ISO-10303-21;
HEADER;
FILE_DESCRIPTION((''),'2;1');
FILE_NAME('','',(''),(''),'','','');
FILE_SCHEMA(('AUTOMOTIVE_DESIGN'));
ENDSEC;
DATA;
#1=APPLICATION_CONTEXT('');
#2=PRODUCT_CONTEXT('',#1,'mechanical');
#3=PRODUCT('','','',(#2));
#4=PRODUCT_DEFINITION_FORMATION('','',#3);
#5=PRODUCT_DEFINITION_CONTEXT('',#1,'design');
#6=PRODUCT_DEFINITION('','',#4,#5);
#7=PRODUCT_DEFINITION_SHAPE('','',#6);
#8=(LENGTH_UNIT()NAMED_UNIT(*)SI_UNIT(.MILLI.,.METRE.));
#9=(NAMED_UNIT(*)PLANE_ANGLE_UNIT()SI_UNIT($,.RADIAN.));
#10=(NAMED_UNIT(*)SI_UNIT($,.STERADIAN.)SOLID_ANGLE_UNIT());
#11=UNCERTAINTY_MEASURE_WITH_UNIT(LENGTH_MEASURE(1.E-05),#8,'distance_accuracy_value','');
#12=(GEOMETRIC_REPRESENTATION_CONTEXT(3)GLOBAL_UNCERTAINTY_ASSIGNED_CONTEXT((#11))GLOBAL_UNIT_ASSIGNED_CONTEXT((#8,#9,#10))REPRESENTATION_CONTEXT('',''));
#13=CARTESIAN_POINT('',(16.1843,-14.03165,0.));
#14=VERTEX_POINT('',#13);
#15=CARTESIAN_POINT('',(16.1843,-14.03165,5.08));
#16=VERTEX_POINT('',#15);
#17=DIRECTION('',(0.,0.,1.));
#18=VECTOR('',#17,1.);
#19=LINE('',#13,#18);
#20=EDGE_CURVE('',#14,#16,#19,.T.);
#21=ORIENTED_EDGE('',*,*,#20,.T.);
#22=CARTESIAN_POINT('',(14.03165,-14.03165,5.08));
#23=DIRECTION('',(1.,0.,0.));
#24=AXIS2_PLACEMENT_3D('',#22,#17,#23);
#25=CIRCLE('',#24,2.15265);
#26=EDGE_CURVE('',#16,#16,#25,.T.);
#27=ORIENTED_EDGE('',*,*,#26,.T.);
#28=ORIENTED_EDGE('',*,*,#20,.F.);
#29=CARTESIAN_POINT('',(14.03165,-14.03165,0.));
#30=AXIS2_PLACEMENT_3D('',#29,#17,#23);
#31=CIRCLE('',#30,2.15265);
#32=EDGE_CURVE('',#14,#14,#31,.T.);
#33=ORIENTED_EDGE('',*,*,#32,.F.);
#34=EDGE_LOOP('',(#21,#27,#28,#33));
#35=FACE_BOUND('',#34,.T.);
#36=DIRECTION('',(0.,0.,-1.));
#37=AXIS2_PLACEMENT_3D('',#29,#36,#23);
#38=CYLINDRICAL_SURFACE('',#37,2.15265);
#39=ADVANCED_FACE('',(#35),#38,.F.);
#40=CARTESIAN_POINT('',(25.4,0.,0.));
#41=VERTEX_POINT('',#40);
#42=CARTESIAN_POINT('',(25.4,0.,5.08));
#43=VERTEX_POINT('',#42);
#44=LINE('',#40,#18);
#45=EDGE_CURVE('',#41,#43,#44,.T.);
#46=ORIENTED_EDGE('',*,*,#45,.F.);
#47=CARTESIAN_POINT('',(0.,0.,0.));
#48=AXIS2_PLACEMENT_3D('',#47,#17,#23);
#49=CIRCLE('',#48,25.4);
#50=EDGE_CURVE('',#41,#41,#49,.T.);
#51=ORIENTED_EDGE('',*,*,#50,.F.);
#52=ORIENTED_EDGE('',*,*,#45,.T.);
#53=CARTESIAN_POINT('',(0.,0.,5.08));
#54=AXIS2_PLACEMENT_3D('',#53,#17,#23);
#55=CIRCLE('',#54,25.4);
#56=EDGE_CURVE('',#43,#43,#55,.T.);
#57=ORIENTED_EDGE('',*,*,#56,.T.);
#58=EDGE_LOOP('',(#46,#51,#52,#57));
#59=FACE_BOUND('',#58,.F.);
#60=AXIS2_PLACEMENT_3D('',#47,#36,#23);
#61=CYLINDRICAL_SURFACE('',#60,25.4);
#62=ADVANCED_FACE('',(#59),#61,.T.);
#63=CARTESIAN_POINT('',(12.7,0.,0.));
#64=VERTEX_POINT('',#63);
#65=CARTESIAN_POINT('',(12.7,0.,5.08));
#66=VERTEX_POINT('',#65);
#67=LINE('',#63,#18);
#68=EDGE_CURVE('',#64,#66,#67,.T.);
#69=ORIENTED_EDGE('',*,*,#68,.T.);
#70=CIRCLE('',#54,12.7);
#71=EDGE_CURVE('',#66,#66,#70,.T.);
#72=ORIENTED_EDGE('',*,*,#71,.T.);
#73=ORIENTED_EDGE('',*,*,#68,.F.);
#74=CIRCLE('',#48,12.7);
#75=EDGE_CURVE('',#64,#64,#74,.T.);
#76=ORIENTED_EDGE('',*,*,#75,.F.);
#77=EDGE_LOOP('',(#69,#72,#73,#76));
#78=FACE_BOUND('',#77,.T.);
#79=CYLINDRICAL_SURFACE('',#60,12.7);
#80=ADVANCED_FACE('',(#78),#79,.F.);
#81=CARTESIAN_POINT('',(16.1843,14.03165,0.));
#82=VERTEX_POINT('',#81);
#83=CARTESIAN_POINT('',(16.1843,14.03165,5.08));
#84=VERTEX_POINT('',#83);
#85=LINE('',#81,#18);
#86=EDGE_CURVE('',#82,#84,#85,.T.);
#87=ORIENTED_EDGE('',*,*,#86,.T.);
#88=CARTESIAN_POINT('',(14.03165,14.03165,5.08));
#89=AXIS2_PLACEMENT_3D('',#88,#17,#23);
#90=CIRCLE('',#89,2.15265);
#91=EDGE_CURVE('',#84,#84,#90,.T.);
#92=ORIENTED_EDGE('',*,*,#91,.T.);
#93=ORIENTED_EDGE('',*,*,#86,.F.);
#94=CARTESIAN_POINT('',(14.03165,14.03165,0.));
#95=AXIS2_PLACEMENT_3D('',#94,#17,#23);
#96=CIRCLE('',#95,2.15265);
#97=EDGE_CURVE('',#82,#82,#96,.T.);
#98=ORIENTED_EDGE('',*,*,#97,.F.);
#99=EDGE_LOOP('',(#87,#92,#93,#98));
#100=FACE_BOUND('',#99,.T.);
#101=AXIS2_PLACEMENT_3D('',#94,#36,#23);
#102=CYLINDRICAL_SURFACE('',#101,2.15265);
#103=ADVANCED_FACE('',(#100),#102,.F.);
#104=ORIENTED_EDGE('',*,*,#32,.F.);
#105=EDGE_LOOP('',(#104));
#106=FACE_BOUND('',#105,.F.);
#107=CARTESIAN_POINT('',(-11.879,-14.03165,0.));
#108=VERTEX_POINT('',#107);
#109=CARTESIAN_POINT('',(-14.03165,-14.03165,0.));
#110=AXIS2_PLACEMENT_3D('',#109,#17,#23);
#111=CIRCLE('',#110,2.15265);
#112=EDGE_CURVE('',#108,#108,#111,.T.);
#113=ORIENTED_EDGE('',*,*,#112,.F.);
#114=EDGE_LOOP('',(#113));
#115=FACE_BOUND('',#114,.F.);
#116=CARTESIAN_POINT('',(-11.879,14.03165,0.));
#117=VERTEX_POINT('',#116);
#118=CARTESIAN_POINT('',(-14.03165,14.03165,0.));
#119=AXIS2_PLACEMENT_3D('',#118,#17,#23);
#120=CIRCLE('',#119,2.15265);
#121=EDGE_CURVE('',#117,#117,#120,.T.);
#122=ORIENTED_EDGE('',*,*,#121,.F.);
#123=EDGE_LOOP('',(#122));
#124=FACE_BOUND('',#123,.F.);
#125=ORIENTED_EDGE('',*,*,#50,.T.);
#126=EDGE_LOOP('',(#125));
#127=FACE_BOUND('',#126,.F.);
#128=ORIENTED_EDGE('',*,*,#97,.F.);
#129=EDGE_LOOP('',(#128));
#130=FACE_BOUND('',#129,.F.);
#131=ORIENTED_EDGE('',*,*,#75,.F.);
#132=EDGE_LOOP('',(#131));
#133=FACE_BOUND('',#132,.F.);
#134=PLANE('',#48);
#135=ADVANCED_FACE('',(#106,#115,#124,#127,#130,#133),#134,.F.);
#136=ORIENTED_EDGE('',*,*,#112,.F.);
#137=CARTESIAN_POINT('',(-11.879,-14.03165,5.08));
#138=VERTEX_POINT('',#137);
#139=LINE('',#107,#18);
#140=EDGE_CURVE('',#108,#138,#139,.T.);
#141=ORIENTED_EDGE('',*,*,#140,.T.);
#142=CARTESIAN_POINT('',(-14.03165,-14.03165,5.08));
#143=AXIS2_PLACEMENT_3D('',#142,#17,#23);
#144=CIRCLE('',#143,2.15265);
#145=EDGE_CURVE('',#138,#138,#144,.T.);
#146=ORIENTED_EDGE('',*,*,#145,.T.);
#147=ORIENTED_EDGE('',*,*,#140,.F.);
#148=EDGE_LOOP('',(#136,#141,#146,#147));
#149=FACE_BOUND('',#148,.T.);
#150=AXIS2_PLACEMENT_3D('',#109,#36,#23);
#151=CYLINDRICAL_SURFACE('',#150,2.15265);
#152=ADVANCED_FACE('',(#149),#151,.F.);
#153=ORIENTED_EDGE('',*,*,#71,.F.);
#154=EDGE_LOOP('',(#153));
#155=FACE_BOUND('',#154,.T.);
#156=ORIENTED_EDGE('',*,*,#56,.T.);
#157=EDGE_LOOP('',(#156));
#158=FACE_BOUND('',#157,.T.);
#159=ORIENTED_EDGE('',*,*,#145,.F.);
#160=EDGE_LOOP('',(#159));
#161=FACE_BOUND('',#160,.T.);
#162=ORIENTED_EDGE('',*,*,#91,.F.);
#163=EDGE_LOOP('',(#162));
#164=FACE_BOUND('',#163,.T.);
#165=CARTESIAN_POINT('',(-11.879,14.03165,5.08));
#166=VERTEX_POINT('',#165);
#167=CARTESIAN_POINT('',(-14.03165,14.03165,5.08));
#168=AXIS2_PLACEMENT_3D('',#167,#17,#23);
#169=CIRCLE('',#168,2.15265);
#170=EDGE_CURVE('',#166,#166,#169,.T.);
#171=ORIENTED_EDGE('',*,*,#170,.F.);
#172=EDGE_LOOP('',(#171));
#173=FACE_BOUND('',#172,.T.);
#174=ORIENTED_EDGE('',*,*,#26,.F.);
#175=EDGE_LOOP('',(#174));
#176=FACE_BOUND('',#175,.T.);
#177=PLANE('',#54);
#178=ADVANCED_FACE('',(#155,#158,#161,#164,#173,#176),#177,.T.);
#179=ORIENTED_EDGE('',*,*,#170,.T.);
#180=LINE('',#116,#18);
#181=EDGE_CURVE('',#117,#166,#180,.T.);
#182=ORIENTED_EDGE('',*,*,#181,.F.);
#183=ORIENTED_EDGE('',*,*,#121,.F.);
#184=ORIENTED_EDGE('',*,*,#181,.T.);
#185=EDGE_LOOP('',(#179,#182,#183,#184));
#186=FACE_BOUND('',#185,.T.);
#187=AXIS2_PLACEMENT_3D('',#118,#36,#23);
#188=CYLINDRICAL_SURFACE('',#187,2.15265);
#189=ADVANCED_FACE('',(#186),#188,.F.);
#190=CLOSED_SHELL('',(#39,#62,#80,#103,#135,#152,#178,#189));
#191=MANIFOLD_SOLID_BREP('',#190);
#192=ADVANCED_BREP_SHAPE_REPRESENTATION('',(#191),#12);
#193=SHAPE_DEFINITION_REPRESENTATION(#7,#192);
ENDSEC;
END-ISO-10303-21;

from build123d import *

# Parameters (mm, degrees)
F0_R     = 25.4
F0_R_2   = 2.15265
F0_R_3   = 12.7
F1_DEPTH = 5.08


# Not quite as in the source:
# - a feature names something its author has since deleted; it is built from what else it names


with BuildPart() as f1:
    # F0 (on Top) → F1 (new body)
    with BuildSketch(Plane.XY):
        Circle(F0_R)
        with Locations((-14.0316501892, -14.0316501892)):
            Circle(F0_R_2, mode=Mode.SUBTRACT)
        Circle(F0_R_3, mode=Mode.SUBTRACT)
        with Locations((14.0316501892, -14.0316501892)):
            Circle(F0_R_2, mode=Mode.SUBTRACT)
        with Locations((-14.0316501892, 14.0316501892)):
            Circle(F0_R_2, mode=Mode.SUBTRACT)
        with Locations((14.0316501892, 14.0316501892)):
            Circle(F0_R_2, mode=Mode.SUBTRACT)
    extrude(amount=F1_DEPTH)


solid = f1.part
